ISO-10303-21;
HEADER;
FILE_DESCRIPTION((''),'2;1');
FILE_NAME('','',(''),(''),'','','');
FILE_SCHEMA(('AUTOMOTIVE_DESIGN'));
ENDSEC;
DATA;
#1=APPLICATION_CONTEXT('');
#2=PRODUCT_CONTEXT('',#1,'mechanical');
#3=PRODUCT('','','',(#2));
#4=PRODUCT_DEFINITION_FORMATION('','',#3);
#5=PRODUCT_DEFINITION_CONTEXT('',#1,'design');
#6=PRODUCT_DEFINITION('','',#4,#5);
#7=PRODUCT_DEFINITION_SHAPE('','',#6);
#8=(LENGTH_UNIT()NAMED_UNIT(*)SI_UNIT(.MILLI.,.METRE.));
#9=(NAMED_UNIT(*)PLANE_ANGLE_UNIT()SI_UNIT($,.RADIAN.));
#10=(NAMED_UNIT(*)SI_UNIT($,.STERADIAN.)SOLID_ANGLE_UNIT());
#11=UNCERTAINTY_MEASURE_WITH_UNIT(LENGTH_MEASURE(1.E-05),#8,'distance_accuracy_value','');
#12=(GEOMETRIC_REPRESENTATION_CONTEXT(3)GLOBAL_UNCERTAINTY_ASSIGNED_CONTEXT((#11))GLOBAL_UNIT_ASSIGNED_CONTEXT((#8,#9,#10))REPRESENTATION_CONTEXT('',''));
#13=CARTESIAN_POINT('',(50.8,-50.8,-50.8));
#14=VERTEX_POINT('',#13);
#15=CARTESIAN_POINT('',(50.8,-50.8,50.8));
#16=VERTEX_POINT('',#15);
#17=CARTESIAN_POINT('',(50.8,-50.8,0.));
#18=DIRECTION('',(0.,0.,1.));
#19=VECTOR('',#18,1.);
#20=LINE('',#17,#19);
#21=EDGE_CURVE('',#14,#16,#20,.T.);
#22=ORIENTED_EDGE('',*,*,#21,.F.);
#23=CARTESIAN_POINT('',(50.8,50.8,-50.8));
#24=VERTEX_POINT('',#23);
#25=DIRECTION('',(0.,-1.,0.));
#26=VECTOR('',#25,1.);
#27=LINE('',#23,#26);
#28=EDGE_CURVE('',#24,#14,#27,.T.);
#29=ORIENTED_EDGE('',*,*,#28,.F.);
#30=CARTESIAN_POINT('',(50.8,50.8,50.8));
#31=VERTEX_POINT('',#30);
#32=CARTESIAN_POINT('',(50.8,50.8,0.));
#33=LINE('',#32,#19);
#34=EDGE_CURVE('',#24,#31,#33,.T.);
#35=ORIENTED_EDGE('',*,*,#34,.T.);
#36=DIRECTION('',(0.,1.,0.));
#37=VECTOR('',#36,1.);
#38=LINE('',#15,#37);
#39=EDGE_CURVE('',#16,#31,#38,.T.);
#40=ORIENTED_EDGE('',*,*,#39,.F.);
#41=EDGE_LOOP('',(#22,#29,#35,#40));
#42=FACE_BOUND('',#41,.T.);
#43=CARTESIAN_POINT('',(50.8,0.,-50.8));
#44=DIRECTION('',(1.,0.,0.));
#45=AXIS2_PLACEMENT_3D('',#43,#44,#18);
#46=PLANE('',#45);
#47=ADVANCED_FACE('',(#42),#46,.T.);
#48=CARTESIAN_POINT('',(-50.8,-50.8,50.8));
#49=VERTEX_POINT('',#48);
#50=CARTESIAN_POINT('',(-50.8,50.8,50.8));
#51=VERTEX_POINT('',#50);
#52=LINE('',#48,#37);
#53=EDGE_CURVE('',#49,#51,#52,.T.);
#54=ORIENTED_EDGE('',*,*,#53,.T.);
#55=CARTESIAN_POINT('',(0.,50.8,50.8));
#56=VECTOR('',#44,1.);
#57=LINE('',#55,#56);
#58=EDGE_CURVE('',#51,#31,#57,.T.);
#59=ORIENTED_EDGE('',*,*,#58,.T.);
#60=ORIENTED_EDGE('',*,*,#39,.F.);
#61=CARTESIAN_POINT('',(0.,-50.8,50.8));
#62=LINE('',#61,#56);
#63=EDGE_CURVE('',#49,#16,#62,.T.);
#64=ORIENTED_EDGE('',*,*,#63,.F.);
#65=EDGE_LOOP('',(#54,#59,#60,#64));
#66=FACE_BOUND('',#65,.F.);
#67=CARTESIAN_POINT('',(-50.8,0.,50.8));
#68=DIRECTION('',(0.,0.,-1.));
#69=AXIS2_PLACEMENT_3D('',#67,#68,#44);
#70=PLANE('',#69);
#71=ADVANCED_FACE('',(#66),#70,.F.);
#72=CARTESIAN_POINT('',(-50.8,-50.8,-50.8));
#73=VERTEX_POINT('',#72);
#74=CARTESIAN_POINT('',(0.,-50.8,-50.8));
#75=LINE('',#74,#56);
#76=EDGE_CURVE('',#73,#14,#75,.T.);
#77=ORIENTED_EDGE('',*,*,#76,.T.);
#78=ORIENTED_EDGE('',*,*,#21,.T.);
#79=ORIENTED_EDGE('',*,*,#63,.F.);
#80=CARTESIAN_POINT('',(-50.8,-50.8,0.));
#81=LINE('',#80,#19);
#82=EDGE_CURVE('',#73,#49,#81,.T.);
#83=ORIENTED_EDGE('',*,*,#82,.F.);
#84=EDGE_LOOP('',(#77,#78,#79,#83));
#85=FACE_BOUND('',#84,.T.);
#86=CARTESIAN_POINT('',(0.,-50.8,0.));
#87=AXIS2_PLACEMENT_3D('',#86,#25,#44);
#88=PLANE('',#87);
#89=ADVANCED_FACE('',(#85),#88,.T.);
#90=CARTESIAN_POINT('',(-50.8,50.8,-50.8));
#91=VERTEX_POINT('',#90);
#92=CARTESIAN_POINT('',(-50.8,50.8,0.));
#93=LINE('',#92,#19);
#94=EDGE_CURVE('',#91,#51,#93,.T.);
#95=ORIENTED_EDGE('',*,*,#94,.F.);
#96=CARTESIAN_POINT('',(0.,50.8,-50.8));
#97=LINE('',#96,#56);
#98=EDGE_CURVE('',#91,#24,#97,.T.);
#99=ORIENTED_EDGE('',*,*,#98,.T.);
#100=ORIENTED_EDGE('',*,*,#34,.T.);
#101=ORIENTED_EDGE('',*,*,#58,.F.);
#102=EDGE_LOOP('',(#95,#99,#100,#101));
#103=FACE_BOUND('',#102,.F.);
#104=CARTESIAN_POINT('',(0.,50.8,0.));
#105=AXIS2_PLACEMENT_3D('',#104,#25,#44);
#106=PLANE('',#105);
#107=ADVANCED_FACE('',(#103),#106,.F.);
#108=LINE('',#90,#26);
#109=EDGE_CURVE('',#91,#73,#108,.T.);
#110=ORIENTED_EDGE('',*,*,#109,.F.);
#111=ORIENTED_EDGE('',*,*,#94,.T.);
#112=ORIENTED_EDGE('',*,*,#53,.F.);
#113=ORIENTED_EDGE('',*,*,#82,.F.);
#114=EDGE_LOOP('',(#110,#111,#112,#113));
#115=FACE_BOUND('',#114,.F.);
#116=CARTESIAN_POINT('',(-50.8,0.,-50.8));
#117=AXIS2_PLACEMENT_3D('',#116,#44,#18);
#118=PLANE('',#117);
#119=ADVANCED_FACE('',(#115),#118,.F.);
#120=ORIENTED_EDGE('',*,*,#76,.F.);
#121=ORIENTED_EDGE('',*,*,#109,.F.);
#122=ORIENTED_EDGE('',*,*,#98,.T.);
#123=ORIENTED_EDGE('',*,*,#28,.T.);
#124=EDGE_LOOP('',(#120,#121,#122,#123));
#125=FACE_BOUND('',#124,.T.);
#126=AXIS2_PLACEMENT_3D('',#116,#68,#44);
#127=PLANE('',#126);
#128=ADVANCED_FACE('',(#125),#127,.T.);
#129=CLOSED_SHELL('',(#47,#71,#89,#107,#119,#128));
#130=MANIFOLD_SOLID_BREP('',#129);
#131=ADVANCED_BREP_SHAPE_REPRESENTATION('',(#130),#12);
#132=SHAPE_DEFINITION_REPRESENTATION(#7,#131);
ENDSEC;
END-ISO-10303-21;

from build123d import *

# Parameters (mm, degrees)
F1_W     = 101.6
F1_H     = 101.6
F2_DEPTH = 50.8


# Not quite as in the source:
# - a variable given as a bare number and used for a length is read in inches; the dataset says mm whatever the document's units were


with BuildPart() as f2:
    # F1 (on Front) → F2 (new body, symmetric)
    with BuildSketch(Plane.XZ):
        Rectangle(F1_W, F1_H)
    extrude(amount=F2_DEPTH, both=True)


solid = f2.part
